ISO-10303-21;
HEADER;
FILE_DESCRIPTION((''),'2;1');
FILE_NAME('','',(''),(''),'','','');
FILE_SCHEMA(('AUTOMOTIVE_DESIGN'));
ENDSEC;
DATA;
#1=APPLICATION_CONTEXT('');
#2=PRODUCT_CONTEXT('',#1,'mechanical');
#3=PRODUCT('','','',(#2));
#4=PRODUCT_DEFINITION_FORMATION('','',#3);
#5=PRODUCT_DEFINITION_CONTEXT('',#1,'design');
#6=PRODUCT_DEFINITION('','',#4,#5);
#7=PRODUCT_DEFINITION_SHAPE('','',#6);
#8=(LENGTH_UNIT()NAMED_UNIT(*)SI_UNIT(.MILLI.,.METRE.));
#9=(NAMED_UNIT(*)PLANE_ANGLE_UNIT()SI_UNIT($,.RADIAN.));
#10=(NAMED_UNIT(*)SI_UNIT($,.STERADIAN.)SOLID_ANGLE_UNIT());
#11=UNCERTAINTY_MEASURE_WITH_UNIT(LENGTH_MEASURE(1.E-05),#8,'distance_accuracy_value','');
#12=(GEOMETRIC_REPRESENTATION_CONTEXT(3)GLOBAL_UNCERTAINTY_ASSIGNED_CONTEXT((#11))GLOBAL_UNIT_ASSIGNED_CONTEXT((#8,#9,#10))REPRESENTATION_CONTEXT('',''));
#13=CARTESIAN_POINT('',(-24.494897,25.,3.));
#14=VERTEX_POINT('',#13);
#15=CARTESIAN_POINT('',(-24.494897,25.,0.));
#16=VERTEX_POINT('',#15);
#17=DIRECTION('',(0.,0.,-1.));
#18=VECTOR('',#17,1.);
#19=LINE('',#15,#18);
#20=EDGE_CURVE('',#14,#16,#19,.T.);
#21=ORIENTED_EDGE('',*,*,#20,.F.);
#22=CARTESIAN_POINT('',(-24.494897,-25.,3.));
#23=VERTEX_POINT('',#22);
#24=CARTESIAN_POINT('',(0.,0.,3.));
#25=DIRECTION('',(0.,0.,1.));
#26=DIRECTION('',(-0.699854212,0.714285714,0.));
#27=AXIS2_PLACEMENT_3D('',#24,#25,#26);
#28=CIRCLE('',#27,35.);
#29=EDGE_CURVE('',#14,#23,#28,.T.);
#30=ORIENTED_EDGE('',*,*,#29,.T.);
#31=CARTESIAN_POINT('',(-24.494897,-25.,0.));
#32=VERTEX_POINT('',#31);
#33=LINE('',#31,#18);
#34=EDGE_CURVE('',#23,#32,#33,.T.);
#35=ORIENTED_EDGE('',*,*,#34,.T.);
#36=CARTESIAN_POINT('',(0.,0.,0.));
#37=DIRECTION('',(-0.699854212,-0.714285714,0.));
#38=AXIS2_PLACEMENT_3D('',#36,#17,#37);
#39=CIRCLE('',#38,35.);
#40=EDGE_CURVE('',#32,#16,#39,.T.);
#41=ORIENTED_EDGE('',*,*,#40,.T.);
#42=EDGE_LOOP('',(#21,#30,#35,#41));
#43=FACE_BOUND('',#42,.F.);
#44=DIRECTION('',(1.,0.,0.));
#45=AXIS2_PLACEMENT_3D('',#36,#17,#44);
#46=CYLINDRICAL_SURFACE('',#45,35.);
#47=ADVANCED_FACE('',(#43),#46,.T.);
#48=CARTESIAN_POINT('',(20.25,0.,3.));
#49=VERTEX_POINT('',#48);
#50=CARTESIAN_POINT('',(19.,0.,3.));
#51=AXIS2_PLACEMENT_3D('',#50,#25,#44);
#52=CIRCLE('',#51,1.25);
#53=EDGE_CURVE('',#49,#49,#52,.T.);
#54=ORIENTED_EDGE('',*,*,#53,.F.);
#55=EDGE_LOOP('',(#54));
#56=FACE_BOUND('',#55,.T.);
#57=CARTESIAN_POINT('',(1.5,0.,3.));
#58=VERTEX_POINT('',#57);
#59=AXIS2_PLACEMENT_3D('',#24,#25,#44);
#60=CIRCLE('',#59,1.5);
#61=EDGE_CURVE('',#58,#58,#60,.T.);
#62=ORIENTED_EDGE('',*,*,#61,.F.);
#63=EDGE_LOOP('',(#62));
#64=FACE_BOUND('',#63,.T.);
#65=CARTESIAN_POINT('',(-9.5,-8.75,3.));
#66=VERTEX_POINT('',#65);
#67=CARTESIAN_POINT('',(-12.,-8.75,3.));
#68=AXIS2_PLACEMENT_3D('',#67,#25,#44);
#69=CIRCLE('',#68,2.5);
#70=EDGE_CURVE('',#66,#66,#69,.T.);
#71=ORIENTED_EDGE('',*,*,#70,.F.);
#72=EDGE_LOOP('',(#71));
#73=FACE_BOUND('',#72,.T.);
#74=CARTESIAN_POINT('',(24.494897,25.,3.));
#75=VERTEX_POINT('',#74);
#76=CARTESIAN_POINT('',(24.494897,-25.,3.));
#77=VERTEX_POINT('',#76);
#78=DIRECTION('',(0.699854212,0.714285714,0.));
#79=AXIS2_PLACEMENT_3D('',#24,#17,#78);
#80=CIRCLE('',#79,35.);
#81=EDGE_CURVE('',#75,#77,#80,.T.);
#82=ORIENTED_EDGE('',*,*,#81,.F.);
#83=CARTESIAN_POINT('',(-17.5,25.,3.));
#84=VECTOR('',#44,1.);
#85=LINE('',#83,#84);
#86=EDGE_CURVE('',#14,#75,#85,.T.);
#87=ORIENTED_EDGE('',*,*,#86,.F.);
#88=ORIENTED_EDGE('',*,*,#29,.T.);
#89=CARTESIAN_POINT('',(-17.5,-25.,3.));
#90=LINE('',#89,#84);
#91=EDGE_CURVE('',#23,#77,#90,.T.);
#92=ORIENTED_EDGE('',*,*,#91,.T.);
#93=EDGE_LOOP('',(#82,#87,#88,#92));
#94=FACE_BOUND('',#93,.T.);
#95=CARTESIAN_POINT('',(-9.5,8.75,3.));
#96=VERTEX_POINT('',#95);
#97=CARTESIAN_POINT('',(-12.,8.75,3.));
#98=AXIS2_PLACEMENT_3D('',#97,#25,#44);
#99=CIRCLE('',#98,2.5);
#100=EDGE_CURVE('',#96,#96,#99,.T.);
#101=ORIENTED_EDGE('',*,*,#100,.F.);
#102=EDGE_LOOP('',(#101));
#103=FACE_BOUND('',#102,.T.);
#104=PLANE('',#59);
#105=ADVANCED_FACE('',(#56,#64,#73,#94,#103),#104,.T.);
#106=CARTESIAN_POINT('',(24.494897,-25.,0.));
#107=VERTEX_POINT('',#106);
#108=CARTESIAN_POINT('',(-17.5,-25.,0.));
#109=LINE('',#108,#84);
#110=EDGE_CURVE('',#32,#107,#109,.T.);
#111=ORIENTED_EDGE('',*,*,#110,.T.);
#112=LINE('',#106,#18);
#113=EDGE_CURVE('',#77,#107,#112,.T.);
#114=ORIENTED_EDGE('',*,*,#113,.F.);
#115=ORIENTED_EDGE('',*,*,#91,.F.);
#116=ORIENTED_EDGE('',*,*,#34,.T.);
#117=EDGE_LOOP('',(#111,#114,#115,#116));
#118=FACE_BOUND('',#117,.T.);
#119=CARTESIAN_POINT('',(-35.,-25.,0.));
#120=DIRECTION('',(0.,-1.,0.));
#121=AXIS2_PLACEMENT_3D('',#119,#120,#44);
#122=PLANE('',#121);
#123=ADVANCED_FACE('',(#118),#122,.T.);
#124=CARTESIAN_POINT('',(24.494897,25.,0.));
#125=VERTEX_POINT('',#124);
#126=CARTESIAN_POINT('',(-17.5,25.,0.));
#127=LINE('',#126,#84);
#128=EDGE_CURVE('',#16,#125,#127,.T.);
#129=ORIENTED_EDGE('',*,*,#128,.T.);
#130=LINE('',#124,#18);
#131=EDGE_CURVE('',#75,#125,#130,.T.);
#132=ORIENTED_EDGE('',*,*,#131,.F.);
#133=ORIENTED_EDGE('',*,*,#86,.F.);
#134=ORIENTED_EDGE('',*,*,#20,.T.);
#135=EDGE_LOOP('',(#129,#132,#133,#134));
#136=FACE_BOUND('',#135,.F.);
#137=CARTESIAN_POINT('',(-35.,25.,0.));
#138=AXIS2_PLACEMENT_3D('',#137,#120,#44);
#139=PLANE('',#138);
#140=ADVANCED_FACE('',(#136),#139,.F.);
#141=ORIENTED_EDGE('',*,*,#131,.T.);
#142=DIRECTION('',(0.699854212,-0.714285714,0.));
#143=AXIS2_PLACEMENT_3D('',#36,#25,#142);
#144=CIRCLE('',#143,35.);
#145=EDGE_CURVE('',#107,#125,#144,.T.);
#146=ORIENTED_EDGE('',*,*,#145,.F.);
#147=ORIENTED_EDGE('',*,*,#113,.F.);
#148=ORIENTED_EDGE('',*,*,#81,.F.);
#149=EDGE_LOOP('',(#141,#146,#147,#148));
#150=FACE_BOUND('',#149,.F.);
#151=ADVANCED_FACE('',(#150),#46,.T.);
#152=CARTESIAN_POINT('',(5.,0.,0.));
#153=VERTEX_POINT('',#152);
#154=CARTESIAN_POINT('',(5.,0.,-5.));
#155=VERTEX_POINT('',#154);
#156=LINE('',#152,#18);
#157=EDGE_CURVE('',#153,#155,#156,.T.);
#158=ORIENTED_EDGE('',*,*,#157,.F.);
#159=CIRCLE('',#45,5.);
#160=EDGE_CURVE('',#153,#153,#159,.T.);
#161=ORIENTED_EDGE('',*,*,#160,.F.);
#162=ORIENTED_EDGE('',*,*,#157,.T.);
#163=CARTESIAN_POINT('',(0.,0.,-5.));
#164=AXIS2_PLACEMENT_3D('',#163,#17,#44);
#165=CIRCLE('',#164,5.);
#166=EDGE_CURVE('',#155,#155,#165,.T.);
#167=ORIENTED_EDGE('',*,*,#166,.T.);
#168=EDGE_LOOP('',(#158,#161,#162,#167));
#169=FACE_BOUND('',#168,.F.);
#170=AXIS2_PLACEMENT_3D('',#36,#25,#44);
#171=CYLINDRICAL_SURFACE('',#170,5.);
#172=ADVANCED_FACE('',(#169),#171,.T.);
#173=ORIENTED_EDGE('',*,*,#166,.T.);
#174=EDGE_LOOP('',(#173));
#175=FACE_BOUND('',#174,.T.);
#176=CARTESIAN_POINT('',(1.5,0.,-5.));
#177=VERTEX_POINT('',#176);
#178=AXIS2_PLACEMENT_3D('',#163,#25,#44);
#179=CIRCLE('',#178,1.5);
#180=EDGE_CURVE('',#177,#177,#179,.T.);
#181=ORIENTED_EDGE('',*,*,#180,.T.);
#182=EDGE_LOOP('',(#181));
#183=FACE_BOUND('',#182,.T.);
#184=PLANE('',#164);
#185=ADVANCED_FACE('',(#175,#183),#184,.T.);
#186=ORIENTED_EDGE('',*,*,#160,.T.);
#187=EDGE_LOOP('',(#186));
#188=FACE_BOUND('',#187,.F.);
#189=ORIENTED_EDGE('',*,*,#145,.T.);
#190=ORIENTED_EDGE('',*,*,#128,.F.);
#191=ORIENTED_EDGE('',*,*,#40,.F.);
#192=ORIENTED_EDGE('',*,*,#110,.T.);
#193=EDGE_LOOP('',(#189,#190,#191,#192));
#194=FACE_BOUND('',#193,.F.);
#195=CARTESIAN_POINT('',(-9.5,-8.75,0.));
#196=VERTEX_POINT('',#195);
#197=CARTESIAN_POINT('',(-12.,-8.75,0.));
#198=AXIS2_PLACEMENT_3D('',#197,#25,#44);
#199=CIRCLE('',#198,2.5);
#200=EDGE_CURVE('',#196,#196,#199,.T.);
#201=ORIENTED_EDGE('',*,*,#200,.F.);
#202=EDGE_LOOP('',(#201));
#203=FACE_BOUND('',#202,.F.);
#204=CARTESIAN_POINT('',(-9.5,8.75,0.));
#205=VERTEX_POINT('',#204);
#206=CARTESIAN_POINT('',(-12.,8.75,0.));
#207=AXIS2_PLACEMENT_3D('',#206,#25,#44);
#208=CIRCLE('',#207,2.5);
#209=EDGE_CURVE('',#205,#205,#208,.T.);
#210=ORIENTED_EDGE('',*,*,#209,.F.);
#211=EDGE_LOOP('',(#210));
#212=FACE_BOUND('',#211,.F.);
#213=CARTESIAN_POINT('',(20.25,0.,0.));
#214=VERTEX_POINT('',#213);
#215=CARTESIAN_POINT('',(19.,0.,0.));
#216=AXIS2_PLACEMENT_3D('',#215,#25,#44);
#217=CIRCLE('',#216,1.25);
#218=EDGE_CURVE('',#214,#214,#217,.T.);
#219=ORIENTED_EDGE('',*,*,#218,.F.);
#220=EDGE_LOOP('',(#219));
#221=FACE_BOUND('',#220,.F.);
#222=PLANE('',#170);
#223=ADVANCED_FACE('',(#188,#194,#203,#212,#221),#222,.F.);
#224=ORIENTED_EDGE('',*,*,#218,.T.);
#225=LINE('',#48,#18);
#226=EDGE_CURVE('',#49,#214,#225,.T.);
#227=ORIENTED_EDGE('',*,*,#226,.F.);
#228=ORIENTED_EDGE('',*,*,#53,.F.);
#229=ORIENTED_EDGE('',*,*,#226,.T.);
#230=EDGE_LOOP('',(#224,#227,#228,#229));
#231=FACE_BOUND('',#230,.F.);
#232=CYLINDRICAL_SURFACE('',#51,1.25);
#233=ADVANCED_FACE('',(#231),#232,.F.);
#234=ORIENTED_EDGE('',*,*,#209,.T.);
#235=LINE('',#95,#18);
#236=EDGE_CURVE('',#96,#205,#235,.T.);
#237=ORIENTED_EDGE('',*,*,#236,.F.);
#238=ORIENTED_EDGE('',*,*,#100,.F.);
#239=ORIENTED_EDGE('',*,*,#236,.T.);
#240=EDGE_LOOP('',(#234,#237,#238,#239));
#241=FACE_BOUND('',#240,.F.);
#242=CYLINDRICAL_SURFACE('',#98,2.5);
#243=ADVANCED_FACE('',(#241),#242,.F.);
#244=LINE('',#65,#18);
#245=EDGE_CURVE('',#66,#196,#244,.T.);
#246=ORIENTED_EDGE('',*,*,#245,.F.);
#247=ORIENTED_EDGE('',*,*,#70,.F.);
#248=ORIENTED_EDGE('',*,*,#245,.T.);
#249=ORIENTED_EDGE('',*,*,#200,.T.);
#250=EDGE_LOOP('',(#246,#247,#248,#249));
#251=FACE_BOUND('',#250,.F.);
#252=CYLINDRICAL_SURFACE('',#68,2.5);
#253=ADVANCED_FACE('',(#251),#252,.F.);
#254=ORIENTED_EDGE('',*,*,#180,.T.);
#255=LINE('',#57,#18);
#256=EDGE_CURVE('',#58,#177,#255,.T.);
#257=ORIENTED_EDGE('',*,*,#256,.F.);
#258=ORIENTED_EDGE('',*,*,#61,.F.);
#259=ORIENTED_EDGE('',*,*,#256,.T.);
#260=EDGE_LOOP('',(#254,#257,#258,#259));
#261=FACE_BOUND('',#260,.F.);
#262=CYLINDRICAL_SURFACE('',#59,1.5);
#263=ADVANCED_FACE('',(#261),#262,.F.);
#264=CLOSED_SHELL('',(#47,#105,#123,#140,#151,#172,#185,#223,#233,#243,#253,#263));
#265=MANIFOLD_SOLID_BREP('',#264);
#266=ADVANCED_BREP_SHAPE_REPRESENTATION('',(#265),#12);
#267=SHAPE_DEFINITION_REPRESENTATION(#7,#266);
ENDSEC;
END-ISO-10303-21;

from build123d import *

# Parameters (mm, degrees)
F0_R     = 35
F1_DEPTH = 3
F2_R     = 5
F3_DEPTH = 5
F4_R     = 1.5
F4_R_2   = 2.5
F4_R_3   = 1.25
F5_DEPTH = 8.001
F6_W     = 70
F6_H     = 50
F7_DEPTH = 10


# Not quite as in the source:
# - a feature names something its author has since deleted; it is built from what else it names


with BuildPart() as f1:
    # F0 (on Top) → F1 (new body)
    with BuildSketch(Plane.XY):
        Circle(F0_R)
    extrude(amount=F1_DEPTH)

    # F2 (on face) → F3 (join)
    with BuildSketch(Plane(origin=(0, 0, 0), x_dir=(1, 0, 0), z_dir=(0, 0, -1))):
        Circle(F2_R)
    extrude(amount=F3_DEPTH)

    # F4 (on face) → F5 (cut, through all)
    with BuildSketch(Plane.XY.offset(3)):
        Circle(F4_R)
        with Locations((-12, 8.75)):
            Circle(F4_R_2)
        with Locations((-12, -8.75)):
            Circle(F4_R_2)
        with Locations((19, 0)):
            Circle(F4_R_3)
    extrude(amount=-F5_DEPTH, mode=Mode.SUBTRACT)

    # F6 (on Top) → F7 (intersect, symmetric)
    with BuildSketch(Plane.XY):
        Rectangle(F6_W, F6_H)
    extrude(amount=F7_DEPTH, both=True, mode=Mode.INTERSECT)


solid = f1.part
